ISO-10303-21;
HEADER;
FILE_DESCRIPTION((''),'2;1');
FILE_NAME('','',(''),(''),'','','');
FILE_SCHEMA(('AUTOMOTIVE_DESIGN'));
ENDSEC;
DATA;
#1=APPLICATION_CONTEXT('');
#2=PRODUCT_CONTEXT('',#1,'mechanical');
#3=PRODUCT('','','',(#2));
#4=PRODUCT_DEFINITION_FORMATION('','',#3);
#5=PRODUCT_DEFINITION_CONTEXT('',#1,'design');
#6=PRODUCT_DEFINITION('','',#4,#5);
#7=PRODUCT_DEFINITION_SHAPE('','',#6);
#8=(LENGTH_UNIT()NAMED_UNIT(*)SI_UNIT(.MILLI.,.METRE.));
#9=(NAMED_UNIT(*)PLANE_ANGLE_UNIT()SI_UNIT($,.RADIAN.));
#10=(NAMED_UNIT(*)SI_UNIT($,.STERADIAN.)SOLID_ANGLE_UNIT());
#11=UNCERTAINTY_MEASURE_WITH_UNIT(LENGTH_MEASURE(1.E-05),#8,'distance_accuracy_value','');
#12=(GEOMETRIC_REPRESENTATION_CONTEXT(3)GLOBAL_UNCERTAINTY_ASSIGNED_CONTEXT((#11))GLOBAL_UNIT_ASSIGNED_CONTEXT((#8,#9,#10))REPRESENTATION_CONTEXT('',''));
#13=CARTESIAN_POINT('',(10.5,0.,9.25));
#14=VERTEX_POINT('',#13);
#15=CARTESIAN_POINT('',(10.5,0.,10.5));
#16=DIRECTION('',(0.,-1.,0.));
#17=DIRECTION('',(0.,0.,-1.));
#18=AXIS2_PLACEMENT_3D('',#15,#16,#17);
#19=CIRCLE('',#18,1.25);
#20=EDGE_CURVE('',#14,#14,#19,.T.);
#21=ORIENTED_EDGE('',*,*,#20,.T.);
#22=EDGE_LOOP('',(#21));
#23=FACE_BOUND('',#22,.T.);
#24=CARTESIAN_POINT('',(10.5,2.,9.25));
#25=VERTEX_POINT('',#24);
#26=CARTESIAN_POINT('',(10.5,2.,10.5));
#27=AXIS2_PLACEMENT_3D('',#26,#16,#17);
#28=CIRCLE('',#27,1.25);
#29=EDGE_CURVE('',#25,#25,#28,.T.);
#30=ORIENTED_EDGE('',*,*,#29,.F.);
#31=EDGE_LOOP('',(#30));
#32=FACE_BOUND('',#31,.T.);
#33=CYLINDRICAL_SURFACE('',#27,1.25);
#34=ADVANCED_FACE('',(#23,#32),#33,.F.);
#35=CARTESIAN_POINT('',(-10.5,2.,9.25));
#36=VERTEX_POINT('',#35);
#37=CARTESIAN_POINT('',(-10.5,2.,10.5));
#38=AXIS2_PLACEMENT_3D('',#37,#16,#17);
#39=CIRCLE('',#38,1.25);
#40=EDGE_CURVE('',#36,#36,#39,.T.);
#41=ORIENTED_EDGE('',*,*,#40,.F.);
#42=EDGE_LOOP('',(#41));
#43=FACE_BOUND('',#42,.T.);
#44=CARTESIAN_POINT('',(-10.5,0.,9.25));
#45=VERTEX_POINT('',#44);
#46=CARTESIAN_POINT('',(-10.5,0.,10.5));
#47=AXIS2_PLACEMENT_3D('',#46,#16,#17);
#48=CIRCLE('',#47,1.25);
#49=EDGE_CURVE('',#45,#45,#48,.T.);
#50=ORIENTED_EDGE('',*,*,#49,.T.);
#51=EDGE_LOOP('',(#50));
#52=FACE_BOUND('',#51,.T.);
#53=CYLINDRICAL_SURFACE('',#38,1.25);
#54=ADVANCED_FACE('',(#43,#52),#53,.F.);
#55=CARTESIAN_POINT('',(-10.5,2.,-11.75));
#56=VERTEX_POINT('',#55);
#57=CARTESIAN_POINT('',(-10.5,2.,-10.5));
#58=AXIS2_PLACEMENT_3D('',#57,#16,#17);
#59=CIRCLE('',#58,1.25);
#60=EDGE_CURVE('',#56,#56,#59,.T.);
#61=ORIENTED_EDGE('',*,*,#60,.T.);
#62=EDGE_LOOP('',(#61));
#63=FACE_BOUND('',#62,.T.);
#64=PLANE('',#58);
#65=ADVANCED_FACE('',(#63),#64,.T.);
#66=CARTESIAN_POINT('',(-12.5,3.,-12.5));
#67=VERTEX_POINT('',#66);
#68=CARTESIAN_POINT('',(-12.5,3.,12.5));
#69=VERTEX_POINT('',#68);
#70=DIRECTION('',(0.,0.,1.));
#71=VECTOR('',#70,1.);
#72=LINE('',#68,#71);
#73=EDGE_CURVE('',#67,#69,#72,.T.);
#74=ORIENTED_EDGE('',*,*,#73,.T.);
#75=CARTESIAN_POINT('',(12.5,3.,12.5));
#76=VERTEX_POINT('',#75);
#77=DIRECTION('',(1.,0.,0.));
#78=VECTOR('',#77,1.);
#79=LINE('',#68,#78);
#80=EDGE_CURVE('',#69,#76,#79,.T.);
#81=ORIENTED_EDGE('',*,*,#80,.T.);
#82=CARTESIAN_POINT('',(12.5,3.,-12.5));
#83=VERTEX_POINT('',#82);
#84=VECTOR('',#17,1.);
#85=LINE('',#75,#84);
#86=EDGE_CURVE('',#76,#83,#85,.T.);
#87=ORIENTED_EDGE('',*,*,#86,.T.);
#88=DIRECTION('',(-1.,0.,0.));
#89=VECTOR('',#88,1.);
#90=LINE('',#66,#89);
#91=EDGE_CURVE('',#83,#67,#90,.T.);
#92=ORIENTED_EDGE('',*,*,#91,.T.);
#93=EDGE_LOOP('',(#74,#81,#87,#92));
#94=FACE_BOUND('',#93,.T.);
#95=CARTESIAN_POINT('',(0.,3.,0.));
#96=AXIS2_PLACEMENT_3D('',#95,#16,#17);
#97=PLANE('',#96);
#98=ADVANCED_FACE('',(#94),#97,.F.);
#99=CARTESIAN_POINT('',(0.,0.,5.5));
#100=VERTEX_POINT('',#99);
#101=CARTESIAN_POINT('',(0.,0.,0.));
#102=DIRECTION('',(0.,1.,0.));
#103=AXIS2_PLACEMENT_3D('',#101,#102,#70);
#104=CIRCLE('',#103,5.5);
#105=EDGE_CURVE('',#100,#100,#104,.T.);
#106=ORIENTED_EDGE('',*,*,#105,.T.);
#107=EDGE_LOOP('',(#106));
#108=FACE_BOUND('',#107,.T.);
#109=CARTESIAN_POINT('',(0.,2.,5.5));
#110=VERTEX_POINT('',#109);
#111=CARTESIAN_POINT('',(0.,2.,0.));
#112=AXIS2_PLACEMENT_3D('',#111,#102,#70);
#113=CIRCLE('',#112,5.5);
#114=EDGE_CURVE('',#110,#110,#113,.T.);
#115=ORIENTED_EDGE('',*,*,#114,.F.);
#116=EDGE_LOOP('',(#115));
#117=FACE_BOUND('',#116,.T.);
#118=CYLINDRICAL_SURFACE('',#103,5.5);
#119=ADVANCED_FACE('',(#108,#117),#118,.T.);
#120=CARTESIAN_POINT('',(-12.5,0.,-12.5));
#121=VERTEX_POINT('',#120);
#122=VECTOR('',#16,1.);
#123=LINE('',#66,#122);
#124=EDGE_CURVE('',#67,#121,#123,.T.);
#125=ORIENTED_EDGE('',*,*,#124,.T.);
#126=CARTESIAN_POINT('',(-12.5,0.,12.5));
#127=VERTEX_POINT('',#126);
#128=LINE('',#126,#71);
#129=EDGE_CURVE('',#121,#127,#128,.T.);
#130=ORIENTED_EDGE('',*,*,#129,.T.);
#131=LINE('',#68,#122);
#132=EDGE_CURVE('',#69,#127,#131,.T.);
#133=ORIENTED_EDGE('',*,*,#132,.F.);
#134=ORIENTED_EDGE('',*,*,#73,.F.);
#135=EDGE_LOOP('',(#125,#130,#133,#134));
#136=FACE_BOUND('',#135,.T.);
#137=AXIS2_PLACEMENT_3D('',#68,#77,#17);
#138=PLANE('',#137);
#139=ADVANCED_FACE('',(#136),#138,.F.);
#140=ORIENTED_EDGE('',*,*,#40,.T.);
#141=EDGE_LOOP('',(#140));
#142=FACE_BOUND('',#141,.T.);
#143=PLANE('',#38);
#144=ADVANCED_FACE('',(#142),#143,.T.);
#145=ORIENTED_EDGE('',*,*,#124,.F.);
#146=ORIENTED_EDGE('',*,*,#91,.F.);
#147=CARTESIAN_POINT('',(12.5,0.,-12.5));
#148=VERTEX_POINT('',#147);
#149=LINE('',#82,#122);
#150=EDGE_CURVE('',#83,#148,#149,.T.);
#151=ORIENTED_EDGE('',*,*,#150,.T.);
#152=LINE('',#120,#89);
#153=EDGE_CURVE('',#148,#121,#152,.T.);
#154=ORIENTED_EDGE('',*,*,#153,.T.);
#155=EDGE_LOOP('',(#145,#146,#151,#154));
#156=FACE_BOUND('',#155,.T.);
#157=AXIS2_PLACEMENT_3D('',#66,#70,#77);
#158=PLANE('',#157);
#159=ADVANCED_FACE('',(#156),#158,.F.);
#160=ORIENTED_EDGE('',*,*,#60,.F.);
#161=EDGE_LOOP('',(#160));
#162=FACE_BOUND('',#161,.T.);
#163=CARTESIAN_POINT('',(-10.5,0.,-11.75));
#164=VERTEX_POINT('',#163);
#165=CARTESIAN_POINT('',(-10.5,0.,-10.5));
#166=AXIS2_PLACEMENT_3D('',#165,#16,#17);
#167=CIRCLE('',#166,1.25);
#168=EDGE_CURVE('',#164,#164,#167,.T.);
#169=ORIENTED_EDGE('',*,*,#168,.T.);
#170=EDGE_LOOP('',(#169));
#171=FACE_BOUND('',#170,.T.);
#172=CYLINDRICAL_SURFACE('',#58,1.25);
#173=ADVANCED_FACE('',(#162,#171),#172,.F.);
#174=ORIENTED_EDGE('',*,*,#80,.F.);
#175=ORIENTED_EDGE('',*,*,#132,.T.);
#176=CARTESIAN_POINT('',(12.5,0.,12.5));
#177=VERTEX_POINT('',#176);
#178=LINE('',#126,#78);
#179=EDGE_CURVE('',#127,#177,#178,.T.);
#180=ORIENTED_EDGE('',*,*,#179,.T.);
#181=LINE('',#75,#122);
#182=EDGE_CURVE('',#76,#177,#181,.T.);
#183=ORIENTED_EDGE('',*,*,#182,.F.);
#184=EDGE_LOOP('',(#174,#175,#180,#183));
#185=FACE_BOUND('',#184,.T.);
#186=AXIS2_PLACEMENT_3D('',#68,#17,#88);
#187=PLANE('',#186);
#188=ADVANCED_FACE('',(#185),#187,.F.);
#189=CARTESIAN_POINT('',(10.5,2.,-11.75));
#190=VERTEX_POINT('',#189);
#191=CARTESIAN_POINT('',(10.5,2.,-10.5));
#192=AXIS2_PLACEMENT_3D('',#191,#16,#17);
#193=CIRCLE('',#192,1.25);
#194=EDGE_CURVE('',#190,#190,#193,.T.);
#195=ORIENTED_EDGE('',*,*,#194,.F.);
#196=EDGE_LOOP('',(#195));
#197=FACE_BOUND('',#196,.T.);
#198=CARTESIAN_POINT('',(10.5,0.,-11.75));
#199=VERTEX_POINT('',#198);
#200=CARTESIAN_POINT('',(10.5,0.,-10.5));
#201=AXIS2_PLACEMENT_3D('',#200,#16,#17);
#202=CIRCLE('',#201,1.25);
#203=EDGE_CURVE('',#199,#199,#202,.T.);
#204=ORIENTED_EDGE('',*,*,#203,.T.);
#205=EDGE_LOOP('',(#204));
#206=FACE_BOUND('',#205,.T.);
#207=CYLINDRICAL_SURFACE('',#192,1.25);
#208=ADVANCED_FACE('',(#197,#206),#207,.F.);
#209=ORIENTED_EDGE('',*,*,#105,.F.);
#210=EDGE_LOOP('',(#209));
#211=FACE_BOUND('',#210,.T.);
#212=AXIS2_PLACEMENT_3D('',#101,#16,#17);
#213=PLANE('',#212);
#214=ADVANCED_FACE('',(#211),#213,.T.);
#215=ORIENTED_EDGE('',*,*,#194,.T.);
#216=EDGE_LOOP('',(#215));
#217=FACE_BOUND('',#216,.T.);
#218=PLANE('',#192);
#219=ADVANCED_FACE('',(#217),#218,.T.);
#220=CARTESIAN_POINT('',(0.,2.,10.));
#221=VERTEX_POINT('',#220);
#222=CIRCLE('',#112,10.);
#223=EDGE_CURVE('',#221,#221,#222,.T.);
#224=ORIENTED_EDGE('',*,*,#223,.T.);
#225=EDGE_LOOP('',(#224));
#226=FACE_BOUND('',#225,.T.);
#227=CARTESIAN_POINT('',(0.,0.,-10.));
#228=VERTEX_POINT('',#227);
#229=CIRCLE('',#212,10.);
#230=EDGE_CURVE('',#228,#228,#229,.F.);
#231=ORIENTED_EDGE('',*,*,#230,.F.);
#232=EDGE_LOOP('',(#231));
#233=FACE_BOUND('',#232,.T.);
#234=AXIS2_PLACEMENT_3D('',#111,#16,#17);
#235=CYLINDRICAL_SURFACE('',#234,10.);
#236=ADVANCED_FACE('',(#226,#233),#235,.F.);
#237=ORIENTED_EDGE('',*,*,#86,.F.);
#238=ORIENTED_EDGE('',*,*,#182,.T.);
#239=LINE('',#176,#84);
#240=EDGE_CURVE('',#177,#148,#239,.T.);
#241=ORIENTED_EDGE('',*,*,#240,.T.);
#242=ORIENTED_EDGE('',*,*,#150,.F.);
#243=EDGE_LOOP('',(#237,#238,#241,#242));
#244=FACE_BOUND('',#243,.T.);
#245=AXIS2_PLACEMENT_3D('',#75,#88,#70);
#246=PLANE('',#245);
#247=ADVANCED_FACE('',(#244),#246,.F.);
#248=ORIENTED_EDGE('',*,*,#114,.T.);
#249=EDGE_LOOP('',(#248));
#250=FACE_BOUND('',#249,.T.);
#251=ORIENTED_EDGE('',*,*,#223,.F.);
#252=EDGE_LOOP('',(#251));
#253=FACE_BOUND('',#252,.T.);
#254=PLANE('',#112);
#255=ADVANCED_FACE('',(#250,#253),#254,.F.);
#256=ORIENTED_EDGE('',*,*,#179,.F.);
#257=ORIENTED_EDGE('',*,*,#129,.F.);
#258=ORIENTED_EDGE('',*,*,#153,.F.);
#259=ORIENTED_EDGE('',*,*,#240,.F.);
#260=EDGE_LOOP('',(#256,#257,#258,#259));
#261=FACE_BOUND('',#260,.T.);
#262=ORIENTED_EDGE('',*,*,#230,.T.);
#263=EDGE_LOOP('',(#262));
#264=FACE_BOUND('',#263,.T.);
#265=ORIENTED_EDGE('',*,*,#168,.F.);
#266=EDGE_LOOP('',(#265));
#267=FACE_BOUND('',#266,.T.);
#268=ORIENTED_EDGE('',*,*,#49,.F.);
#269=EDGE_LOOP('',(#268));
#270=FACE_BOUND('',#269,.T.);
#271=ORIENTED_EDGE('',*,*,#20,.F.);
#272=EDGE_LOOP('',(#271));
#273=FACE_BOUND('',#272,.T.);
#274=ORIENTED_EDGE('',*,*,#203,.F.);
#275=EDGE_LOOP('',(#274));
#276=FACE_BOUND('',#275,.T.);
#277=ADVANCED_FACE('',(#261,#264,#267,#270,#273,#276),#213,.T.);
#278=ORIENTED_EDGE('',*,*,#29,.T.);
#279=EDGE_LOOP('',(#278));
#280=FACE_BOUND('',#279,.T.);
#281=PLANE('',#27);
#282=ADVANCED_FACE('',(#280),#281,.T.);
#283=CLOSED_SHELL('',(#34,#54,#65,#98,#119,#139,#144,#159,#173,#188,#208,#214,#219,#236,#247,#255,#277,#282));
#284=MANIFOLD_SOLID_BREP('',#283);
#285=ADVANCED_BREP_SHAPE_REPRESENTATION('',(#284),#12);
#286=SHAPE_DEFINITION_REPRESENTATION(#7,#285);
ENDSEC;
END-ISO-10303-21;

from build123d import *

# Parameters (mm, degrees)
SKETCH1_W           = 25
SKETCH1_H           = 25
BOSS_EXTRUDE1_DEPTH = 3
CAVITY1_OUTLINE_R   = 10
CAVITY1_OUTLINE_R_2 = 5.5
CAVITY1_DEPTH       = 2
SKETCH2_R           = 1.25
CUT_EXTRUDE1_DEPTH  = 2


# Read off the part's stored shape, not the designer's step: Cavity1
with BuildPart() as part:
    # Sketch1 → Boss-Extrude1 (new body)
    with BuildSketch(Plane(origin=(0, 0, 0), x_dir=(1, 0, 0), z_dir=(0, 1, 0))):
        Rectangle(SKETCH1_W, SKETCH1_H)
    extrude(amount=BOSS_EXTRUDE1_DEPTH)

    # Cavity1 outline → Cavity1 (cut)
    with BuildSketch(Plane(origin=(0, 0, 0), x_dir=(1, 0, 0), z_dir=(0, 1, 0))):
        Circle(CAVITY1_OUTLINE_R)
        Circle(CAVITY1_OUTLINE_R_2, mode=Mode.SUBTRACT)
    extrude(amount=CAVITY1_DEPTH, mode=Mode.SUBTRACT)

    # Sketch2 → Cut-Extrude1 (cut)
    with BuildSketch(Plane.XZ):
        with Locations(Location((-10.5, 10.5, 0), (0, 0, 270))):
            Circle(SKETCH2_R)
        with Locations(Location((10.5, 10.5, 0), (0, 0, 270))):
            Circle(SKETCH2_R)
        with Locations(Location((10.5, -10.5, 0), (0, 0, 270))):
            Circle(SKETCH2_R)
        with Locations(Location((-10.5, -10.5, 0), (0, 0, 270))):
            Circle(SKETCH2_R)
    extrude(amount=-CUT_EXTRUDE1_DEPTH, mode=Mode.SUBTRACT)


solid = part.part
